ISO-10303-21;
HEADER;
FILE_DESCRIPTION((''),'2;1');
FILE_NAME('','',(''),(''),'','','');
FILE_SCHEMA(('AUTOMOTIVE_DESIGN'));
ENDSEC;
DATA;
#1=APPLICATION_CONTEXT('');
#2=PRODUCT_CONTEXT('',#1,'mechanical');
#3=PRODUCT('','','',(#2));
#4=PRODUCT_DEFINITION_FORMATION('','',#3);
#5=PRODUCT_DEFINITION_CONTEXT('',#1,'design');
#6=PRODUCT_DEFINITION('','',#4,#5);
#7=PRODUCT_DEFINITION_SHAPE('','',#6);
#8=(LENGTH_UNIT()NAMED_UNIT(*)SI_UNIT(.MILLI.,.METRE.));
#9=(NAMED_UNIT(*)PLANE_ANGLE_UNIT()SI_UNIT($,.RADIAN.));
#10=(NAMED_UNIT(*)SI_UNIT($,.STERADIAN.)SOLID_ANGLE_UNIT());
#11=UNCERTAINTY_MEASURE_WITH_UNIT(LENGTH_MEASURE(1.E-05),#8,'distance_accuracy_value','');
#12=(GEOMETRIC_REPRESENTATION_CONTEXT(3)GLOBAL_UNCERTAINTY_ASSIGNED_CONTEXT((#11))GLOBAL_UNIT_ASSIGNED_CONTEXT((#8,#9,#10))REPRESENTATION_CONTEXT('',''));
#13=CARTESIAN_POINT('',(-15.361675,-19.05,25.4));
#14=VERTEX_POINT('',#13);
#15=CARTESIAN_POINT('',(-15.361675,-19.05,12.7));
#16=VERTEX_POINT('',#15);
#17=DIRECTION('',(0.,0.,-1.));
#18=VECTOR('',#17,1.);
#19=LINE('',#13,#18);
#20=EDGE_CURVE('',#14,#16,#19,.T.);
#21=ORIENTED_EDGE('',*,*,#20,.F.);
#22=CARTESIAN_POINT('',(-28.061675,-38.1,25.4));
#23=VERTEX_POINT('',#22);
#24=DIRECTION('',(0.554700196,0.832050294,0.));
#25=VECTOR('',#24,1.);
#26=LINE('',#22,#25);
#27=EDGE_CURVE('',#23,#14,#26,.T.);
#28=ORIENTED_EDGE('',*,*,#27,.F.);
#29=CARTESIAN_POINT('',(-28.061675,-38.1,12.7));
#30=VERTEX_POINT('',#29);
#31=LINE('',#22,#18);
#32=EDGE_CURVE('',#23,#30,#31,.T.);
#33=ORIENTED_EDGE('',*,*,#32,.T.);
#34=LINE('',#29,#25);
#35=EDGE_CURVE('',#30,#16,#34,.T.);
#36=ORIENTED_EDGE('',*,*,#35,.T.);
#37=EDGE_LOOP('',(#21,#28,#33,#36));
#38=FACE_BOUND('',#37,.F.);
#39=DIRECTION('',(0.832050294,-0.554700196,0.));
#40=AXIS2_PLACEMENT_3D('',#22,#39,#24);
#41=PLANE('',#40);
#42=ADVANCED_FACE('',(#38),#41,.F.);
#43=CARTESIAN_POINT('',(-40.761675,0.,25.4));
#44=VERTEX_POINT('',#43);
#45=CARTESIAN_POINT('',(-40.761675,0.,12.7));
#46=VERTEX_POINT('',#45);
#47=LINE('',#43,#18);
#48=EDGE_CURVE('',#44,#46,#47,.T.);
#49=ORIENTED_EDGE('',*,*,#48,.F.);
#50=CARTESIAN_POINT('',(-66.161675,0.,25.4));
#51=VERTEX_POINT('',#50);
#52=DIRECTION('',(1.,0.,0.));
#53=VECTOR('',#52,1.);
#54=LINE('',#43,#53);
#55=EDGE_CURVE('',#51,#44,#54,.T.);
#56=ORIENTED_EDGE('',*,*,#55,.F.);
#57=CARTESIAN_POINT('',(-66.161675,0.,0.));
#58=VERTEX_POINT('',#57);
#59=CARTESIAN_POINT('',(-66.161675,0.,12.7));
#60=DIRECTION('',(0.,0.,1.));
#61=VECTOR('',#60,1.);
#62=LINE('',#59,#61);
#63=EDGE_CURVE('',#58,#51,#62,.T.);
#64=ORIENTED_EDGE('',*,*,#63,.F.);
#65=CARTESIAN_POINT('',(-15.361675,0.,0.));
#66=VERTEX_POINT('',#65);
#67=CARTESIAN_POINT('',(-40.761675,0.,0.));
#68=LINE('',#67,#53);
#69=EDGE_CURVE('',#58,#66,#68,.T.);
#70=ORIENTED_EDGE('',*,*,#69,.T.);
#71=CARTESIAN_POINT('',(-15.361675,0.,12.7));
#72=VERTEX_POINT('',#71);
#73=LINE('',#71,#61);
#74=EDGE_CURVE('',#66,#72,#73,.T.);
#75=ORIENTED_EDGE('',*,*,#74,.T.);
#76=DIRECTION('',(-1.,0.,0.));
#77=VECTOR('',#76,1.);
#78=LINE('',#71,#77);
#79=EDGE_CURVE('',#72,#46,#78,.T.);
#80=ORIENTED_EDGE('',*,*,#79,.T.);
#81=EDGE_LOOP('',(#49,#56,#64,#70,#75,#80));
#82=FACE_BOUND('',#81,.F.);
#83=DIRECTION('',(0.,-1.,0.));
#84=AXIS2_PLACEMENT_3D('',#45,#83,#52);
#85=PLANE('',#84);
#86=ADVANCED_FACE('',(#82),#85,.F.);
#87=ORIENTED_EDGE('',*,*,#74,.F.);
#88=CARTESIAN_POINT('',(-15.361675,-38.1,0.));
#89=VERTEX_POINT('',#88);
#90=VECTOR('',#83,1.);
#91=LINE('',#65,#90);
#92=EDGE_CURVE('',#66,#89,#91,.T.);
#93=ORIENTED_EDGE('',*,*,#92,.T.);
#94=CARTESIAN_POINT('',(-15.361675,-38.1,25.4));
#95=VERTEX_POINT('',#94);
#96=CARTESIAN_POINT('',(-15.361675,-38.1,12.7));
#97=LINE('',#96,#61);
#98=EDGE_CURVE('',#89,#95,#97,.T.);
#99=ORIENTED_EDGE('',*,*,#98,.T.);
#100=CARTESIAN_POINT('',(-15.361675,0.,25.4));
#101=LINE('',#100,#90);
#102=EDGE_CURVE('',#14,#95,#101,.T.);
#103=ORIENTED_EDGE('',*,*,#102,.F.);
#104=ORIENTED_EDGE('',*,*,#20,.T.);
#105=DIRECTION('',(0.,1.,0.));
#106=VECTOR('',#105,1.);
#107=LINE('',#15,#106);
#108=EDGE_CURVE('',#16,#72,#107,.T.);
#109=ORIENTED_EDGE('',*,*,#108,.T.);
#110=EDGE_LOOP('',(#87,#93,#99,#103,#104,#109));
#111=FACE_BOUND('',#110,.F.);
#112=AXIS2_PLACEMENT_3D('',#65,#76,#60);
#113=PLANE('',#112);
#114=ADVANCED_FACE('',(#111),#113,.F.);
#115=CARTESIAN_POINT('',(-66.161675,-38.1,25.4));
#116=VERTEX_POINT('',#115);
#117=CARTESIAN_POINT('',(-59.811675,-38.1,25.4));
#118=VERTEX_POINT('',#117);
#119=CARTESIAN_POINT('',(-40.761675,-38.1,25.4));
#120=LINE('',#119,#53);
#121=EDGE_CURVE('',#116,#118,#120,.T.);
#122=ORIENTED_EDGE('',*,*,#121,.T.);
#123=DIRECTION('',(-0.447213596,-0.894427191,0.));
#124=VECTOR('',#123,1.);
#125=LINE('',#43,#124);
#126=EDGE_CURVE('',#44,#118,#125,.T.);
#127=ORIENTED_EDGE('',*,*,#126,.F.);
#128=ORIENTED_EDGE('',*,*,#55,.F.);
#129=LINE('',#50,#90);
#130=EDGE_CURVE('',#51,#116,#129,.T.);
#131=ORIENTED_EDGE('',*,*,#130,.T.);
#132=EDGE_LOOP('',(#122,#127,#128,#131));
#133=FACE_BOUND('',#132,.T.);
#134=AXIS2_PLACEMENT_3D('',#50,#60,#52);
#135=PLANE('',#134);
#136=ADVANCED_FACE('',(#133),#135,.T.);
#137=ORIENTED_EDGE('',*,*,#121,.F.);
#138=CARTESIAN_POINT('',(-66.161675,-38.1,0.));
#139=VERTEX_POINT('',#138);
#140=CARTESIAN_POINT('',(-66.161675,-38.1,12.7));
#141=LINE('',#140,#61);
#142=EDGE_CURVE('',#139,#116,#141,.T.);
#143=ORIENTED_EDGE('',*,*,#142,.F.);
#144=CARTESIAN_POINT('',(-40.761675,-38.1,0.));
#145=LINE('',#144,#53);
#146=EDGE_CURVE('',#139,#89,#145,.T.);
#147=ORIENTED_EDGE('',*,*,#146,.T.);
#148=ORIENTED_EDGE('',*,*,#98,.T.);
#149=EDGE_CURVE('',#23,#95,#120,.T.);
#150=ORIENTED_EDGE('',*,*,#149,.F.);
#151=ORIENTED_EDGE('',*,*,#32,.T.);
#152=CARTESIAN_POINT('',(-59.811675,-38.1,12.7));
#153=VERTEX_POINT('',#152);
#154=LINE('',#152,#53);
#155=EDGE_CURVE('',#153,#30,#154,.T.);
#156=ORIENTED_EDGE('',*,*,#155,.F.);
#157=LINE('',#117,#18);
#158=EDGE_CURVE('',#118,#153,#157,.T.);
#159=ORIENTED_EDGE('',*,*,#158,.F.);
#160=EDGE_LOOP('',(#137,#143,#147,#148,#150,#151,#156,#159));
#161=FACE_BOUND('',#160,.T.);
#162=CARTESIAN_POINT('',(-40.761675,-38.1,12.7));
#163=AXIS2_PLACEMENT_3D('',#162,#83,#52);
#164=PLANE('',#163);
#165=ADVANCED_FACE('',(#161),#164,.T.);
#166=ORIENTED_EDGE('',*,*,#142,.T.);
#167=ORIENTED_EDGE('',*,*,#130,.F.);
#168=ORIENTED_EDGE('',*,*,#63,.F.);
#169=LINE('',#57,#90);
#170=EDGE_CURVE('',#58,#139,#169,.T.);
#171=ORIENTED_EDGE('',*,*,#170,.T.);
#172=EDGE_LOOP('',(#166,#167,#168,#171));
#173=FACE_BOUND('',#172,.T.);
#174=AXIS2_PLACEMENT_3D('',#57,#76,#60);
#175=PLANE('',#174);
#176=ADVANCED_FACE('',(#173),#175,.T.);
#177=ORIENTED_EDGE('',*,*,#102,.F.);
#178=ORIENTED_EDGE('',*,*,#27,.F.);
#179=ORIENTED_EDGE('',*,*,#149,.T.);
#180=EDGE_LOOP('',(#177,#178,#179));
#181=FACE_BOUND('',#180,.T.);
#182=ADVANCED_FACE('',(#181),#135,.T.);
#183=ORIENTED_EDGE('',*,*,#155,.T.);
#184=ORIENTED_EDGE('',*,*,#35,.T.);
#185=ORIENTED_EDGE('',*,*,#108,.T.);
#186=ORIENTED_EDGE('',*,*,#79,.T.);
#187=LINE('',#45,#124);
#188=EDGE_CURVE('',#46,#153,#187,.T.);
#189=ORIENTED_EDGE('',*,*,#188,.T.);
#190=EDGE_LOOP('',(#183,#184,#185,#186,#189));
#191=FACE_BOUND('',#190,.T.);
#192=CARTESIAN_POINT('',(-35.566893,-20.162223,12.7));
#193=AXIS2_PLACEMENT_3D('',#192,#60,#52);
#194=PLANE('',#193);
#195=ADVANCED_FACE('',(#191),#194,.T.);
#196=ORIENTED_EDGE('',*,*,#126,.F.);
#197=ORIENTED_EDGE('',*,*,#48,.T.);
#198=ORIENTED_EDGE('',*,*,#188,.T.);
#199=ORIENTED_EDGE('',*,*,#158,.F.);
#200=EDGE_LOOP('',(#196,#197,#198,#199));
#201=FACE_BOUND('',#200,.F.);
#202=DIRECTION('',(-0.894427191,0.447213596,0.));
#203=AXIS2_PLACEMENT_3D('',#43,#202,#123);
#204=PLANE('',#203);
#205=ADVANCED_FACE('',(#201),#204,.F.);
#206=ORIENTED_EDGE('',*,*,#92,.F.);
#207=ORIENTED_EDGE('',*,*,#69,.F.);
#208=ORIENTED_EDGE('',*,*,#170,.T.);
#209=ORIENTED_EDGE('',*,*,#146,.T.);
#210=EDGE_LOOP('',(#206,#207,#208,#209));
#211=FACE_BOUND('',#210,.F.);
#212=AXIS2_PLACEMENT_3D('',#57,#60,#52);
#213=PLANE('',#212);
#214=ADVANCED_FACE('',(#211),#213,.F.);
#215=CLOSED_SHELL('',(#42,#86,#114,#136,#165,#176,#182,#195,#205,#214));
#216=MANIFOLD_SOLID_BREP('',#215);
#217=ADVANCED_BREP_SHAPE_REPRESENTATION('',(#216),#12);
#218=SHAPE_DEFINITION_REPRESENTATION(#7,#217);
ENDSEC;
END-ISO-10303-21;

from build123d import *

# Parameters (mm, degrees)
F0_W     = 50.8
F0_H     = 25.4
F1_DEPTH = 38.1
F3_DEPTH = 12.7


# Not quite as in the source:
# - a length typed as a fraction of an inch, garbled in the dataset ("3 / 203.2 mm" for 3/8 in), is restored


with BuildPart() as f1:
    # F0 (on Front) → F1 (new body)
    with BuildSketch(Plane.XZ):
        with Locations((-40.7616753732, 12.7)):
            Rectangle(F0_W, F0_H)
    extrude(amount=F1_DEPTH)

    # F2 (on face) → F3 (cut)
    with BuildSketch(Plane.XY.offset(25.4)):
        Polygon((-15.3616753732, 0), (-40.7616753732, 0), (-59.8116753732, -38.1), (-28.0616753732, -38.1), (-15.3616753732, -19.05), align=None)
    extrude(amount=-F3_DEPTH, mode=Mode.SUBTRACT)


solid = f1.part
